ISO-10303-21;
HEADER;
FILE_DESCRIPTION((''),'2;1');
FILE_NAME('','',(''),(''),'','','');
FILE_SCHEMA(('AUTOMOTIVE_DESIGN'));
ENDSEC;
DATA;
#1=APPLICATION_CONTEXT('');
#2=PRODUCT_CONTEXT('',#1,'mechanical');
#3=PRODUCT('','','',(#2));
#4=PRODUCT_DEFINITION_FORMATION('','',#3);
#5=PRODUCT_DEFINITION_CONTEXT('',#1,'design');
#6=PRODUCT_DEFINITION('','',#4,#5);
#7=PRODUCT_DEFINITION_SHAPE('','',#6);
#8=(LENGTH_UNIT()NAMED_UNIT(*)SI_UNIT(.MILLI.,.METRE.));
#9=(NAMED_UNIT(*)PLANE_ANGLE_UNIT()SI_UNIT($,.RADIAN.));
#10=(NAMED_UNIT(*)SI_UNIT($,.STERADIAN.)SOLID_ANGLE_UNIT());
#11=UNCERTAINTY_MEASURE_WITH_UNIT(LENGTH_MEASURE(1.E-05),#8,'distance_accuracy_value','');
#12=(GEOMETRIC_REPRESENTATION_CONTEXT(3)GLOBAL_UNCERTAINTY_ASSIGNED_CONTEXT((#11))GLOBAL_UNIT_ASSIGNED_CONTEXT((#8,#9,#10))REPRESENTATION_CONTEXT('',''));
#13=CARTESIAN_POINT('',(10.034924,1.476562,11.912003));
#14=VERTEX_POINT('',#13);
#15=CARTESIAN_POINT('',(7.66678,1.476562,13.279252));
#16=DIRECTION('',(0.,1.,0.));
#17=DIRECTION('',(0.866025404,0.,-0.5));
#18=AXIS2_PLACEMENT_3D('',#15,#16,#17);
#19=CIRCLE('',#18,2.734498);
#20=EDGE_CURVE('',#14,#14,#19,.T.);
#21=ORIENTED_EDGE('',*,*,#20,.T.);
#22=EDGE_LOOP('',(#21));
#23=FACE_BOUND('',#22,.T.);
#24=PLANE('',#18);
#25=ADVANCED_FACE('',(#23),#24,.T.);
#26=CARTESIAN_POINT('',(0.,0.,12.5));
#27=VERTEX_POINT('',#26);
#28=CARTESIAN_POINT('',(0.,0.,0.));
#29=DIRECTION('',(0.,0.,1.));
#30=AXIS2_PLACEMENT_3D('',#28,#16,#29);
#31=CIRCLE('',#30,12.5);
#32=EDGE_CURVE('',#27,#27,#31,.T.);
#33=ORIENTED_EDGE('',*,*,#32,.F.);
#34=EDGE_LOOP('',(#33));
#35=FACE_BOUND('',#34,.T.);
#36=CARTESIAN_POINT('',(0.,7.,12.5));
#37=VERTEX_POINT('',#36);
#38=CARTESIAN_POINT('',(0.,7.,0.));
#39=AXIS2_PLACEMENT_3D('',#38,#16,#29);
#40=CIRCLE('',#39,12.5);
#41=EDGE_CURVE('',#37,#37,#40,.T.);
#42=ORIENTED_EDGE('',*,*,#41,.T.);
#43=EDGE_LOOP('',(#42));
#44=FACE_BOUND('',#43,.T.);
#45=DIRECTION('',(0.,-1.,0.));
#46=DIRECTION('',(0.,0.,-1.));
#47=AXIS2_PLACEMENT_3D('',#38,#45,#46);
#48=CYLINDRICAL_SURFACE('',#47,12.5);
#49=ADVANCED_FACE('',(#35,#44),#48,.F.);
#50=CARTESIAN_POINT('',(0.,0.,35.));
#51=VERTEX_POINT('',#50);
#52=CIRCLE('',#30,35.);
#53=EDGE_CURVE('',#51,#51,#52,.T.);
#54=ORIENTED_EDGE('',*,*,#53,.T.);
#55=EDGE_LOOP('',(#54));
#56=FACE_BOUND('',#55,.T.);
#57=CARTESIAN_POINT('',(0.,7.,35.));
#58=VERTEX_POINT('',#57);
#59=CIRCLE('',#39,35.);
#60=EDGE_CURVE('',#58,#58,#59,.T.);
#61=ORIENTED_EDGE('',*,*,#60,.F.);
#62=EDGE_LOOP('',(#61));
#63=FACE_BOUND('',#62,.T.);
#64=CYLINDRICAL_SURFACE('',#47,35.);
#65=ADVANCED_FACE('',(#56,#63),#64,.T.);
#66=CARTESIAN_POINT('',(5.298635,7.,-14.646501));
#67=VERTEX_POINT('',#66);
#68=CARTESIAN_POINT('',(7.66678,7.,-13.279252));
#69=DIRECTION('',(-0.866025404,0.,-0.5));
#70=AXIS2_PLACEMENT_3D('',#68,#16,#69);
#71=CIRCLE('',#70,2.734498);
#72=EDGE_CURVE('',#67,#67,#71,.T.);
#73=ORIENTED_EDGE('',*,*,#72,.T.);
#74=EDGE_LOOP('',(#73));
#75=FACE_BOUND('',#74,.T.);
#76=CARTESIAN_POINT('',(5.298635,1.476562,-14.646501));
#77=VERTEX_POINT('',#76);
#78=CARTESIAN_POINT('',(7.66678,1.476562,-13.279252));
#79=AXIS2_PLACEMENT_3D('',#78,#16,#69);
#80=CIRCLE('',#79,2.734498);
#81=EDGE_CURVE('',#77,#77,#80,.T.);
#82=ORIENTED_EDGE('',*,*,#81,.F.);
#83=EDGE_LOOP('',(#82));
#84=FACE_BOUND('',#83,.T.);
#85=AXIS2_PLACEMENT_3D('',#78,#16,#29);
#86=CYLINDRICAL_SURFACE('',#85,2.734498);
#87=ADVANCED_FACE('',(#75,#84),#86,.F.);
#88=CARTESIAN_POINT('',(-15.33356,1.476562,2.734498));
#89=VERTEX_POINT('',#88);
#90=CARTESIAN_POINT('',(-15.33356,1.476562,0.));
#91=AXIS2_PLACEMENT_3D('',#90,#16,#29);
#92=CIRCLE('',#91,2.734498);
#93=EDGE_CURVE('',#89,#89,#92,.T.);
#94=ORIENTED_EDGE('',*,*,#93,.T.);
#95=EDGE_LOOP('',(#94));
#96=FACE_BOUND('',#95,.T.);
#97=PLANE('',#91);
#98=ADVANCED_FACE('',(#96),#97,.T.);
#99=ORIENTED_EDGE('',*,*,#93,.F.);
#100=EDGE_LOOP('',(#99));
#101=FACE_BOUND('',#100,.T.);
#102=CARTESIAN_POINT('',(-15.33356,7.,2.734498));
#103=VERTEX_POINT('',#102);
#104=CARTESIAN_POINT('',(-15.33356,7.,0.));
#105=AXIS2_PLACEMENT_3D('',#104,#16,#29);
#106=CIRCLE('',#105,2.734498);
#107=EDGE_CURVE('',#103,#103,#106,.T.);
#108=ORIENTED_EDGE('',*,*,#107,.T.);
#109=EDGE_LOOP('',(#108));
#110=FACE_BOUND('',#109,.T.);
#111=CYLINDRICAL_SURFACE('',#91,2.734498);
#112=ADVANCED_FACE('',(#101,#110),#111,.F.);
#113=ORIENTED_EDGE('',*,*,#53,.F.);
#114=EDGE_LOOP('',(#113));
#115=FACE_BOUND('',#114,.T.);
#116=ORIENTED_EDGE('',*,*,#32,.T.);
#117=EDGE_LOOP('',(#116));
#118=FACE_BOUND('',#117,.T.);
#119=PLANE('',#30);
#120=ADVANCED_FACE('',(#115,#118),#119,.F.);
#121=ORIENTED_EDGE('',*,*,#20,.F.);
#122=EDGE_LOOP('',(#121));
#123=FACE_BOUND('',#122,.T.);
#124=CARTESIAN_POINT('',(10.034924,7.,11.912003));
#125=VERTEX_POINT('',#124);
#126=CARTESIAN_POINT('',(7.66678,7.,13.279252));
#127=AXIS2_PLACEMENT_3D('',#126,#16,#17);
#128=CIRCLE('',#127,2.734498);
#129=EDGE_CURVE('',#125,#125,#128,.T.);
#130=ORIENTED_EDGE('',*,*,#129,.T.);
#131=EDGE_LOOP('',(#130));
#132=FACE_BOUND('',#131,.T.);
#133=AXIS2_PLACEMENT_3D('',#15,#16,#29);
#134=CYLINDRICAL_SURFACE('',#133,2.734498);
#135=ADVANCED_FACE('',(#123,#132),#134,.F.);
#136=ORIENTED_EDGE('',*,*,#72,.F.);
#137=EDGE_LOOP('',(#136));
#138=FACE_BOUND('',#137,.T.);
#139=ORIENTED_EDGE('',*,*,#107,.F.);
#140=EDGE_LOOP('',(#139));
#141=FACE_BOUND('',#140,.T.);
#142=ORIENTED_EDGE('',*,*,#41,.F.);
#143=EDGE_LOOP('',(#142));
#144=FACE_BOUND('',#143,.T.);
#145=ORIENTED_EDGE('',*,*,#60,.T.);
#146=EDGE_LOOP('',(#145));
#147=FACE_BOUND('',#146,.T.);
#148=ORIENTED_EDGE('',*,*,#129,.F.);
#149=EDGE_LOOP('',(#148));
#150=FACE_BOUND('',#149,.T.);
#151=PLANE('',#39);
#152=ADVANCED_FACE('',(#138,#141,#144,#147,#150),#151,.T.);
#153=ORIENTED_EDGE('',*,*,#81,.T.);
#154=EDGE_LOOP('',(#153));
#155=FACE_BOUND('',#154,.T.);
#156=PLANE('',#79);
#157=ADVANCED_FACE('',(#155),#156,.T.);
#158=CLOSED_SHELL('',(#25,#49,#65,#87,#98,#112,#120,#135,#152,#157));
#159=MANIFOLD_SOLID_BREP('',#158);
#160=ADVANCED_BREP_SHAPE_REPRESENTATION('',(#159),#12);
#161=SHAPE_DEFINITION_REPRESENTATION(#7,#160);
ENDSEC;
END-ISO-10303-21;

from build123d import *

# Parameters (mm, degrees)
SKETCH1_R           = 35
BOSS_EXTRUDE1_DEPTH = 7
SKETCH2_R           = 12.5
CUT_EXTRUDE1_DEPTH  = 50.989999
SKETCH3_R           = 2.734497858
CUT_EXTRUDE2_DEPTH  = 5.523438113
CIRPATTERN1_COUNT   = 3


with BuildPart() as part:
    # Sketch1 → Boss-Extrude1 (new body)
    with BuildSketch(Plane(origin=(0, 0, 0), x_dir=(1, 0, 0), z_dir=(0, 1, 0))):
        Circle(SKETCH1_R)
    extrude(amount=BOSS_EXTRUDE1_DEPTH)

    # Sketch2 → Cut-Extrude1 (cut, through all)
    with BuildSketch(Plane(origin=(0, 0, 0), x_dir=(1, 0, 0), z_dir=(0, 1, 0))):
        Circle(SKETCH2_R)
    extrude(amount=CUT_EXTRUDE1_DEPTH, mode=Mode.SUBTRACT)

    # Sketch3 → Cut-Extrude2 (cut)
    with BuildSketch(Plane(origin=(0, 7, 0), x_dir=(1, 0, 0), z_dir=(0, 1, 0))):
        with Locations((-15.333559702, 0)):
            Circle(SKETCH3_R)
    cut_extrude2 = extrude(amount=-CUT_EXTRUDE2_DEPTH, mode=Mode.SUBTRACT)

    # CirPattern1: Cut-Extrude2 ×3 about axis
    cirpattern1_axis = Axis((0, 0, 0), (0, 1, 0))
    for i in range(1, CIRPATTERN1_COUNT):
        add(cut_extrude2.rotate(cirpattern1_axis, i * 360 / CIRPATTERN1_COUNT), mode=Mode.SUBTRACT)


solid = part.part
